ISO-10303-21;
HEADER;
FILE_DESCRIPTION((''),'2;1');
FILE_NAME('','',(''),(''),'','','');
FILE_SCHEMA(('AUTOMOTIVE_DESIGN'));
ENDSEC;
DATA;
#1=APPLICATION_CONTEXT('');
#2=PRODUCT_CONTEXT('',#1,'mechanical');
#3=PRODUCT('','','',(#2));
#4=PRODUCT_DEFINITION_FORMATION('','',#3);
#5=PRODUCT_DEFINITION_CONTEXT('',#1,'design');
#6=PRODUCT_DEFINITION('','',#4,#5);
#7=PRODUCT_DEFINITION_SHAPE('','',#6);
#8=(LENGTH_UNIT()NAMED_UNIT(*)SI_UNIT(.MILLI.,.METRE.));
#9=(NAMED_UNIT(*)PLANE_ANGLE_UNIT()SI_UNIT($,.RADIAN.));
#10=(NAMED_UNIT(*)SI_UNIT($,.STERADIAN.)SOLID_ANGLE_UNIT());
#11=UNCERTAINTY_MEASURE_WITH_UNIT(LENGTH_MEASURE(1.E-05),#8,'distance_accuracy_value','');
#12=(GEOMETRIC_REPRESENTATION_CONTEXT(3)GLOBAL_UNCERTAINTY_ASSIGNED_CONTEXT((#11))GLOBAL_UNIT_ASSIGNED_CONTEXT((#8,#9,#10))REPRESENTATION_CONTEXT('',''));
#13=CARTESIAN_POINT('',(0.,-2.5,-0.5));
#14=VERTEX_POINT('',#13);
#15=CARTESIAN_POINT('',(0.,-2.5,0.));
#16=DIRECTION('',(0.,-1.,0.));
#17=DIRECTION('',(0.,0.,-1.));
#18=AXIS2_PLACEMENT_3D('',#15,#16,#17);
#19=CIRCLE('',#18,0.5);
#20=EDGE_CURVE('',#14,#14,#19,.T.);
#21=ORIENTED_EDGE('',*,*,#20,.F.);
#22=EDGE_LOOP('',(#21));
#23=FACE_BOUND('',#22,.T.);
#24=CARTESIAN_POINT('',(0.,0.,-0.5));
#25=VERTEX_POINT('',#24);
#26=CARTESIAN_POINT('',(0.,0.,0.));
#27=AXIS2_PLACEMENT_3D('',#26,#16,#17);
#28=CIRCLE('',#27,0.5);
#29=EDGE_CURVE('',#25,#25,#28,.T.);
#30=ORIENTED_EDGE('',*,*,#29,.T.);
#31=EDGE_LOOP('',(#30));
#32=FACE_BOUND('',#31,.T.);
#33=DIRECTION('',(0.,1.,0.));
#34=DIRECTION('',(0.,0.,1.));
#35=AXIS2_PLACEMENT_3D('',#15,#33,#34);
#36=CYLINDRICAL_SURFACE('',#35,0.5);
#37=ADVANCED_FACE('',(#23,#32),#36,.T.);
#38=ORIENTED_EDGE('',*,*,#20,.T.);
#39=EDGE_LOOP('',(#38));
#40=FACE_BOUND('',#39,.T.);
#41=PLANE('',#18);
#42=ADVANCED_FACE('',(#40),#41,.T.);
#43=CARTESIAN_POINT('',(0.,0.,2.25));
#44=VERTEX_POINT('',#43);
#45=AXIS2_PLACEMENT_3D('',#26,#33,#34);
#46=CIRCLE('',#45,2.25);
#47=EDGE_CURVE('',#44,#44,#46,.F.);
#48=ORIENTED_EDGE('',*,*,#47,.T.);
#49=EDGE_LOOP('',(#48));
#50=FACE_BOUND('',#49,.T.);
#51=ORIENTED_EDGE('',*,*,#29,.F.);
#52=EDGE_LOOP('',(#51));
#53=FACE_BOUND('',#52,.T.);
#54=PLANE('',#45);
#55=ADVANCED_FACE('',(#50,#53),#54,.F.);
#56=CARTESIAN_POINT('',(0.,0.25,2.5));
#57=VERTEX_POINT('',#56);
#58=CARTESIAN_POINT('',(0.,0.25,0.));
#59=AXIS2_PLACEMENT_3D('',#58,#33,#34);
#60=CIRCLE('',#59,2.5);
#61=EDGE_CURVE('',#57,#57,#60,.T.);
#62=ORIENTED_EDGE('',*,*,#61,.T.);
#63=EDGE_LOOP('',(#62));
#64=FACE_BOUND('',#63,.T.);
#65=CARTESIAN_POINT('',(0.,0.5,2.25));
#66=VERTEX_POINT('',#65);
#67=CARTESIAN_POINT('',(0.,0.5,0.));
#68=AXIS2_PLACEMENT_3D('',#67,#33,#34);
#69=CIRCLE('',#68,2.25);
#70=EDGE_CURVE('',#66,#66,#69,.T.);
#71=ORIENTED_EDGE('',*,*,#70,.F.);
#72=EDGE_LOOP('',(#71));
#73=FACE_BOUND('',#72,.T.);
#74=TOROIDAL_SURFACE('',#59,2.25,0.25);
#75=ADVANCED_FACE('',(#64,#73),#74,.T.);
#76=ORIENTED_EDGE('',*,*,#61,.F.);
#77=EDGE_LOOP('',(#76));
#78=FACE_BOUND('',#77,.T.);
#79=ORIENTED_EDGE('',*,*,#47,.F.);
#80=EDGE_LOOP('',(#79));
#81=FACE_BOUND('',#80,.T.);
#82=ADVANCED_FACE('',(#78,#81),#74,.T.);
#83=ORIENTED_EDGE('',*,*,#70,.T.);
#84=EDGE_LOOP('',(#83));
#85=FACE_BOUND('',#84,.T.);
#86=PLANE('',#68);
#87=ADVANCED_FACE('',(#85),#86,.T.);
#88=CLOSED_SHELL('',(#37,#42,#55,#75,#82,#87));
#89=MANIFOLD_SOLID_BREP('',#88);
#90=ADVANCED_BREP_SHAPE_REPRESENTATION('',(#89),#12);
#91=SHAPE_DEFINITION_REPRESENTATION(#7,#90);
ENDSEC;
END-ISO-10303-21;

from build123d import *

# Parameters (mm, degrees)
SKETCH2_R           = 2.5
BOSS_EXTRUDE1_DEPTH = 0.5
SKETCH3_R           = 0.5
BOSS_EXTRUDE2_DEPTH = 2.5
FILLET1_R           = 0.25


with BuildPart() as part:
    # Sketch2 → Boss-Extrude1 (new body)
    with BuildSketch(Plane(origin=(0, 0, 0), x_dir=(1, 0, 0), z_dir=(0, 1, 0))):
        with Locations(Location((0, 0, 0), (0, 0, 270))):
            Circle(SKETCH2_R)
    extrude(amount=BOSS_EXTRUDE1_DEPTH)

    # Sketch3 → Boss-Extrude2 (add)
    with BuildSketch(Plane.XZ):
        with Locations(Location((0, 0, 0), (0, 0, 270))):
            Circle(SKETCH3_R)
    extrude(amount=BOSS_EXTRUDE2_DEPTH)

    # Fillet1
    fillet1_edges = [part.edges().sort_by_distance(p)[0] for p in [
        (0, 0, -2.5),
        (0, 0.5, -2.5),
    ]]
    fillet(fillet1_edges, radius=FILLET1_R - 0.0001)  # a hair under: the kernel refuses the full size


solid = part.part
